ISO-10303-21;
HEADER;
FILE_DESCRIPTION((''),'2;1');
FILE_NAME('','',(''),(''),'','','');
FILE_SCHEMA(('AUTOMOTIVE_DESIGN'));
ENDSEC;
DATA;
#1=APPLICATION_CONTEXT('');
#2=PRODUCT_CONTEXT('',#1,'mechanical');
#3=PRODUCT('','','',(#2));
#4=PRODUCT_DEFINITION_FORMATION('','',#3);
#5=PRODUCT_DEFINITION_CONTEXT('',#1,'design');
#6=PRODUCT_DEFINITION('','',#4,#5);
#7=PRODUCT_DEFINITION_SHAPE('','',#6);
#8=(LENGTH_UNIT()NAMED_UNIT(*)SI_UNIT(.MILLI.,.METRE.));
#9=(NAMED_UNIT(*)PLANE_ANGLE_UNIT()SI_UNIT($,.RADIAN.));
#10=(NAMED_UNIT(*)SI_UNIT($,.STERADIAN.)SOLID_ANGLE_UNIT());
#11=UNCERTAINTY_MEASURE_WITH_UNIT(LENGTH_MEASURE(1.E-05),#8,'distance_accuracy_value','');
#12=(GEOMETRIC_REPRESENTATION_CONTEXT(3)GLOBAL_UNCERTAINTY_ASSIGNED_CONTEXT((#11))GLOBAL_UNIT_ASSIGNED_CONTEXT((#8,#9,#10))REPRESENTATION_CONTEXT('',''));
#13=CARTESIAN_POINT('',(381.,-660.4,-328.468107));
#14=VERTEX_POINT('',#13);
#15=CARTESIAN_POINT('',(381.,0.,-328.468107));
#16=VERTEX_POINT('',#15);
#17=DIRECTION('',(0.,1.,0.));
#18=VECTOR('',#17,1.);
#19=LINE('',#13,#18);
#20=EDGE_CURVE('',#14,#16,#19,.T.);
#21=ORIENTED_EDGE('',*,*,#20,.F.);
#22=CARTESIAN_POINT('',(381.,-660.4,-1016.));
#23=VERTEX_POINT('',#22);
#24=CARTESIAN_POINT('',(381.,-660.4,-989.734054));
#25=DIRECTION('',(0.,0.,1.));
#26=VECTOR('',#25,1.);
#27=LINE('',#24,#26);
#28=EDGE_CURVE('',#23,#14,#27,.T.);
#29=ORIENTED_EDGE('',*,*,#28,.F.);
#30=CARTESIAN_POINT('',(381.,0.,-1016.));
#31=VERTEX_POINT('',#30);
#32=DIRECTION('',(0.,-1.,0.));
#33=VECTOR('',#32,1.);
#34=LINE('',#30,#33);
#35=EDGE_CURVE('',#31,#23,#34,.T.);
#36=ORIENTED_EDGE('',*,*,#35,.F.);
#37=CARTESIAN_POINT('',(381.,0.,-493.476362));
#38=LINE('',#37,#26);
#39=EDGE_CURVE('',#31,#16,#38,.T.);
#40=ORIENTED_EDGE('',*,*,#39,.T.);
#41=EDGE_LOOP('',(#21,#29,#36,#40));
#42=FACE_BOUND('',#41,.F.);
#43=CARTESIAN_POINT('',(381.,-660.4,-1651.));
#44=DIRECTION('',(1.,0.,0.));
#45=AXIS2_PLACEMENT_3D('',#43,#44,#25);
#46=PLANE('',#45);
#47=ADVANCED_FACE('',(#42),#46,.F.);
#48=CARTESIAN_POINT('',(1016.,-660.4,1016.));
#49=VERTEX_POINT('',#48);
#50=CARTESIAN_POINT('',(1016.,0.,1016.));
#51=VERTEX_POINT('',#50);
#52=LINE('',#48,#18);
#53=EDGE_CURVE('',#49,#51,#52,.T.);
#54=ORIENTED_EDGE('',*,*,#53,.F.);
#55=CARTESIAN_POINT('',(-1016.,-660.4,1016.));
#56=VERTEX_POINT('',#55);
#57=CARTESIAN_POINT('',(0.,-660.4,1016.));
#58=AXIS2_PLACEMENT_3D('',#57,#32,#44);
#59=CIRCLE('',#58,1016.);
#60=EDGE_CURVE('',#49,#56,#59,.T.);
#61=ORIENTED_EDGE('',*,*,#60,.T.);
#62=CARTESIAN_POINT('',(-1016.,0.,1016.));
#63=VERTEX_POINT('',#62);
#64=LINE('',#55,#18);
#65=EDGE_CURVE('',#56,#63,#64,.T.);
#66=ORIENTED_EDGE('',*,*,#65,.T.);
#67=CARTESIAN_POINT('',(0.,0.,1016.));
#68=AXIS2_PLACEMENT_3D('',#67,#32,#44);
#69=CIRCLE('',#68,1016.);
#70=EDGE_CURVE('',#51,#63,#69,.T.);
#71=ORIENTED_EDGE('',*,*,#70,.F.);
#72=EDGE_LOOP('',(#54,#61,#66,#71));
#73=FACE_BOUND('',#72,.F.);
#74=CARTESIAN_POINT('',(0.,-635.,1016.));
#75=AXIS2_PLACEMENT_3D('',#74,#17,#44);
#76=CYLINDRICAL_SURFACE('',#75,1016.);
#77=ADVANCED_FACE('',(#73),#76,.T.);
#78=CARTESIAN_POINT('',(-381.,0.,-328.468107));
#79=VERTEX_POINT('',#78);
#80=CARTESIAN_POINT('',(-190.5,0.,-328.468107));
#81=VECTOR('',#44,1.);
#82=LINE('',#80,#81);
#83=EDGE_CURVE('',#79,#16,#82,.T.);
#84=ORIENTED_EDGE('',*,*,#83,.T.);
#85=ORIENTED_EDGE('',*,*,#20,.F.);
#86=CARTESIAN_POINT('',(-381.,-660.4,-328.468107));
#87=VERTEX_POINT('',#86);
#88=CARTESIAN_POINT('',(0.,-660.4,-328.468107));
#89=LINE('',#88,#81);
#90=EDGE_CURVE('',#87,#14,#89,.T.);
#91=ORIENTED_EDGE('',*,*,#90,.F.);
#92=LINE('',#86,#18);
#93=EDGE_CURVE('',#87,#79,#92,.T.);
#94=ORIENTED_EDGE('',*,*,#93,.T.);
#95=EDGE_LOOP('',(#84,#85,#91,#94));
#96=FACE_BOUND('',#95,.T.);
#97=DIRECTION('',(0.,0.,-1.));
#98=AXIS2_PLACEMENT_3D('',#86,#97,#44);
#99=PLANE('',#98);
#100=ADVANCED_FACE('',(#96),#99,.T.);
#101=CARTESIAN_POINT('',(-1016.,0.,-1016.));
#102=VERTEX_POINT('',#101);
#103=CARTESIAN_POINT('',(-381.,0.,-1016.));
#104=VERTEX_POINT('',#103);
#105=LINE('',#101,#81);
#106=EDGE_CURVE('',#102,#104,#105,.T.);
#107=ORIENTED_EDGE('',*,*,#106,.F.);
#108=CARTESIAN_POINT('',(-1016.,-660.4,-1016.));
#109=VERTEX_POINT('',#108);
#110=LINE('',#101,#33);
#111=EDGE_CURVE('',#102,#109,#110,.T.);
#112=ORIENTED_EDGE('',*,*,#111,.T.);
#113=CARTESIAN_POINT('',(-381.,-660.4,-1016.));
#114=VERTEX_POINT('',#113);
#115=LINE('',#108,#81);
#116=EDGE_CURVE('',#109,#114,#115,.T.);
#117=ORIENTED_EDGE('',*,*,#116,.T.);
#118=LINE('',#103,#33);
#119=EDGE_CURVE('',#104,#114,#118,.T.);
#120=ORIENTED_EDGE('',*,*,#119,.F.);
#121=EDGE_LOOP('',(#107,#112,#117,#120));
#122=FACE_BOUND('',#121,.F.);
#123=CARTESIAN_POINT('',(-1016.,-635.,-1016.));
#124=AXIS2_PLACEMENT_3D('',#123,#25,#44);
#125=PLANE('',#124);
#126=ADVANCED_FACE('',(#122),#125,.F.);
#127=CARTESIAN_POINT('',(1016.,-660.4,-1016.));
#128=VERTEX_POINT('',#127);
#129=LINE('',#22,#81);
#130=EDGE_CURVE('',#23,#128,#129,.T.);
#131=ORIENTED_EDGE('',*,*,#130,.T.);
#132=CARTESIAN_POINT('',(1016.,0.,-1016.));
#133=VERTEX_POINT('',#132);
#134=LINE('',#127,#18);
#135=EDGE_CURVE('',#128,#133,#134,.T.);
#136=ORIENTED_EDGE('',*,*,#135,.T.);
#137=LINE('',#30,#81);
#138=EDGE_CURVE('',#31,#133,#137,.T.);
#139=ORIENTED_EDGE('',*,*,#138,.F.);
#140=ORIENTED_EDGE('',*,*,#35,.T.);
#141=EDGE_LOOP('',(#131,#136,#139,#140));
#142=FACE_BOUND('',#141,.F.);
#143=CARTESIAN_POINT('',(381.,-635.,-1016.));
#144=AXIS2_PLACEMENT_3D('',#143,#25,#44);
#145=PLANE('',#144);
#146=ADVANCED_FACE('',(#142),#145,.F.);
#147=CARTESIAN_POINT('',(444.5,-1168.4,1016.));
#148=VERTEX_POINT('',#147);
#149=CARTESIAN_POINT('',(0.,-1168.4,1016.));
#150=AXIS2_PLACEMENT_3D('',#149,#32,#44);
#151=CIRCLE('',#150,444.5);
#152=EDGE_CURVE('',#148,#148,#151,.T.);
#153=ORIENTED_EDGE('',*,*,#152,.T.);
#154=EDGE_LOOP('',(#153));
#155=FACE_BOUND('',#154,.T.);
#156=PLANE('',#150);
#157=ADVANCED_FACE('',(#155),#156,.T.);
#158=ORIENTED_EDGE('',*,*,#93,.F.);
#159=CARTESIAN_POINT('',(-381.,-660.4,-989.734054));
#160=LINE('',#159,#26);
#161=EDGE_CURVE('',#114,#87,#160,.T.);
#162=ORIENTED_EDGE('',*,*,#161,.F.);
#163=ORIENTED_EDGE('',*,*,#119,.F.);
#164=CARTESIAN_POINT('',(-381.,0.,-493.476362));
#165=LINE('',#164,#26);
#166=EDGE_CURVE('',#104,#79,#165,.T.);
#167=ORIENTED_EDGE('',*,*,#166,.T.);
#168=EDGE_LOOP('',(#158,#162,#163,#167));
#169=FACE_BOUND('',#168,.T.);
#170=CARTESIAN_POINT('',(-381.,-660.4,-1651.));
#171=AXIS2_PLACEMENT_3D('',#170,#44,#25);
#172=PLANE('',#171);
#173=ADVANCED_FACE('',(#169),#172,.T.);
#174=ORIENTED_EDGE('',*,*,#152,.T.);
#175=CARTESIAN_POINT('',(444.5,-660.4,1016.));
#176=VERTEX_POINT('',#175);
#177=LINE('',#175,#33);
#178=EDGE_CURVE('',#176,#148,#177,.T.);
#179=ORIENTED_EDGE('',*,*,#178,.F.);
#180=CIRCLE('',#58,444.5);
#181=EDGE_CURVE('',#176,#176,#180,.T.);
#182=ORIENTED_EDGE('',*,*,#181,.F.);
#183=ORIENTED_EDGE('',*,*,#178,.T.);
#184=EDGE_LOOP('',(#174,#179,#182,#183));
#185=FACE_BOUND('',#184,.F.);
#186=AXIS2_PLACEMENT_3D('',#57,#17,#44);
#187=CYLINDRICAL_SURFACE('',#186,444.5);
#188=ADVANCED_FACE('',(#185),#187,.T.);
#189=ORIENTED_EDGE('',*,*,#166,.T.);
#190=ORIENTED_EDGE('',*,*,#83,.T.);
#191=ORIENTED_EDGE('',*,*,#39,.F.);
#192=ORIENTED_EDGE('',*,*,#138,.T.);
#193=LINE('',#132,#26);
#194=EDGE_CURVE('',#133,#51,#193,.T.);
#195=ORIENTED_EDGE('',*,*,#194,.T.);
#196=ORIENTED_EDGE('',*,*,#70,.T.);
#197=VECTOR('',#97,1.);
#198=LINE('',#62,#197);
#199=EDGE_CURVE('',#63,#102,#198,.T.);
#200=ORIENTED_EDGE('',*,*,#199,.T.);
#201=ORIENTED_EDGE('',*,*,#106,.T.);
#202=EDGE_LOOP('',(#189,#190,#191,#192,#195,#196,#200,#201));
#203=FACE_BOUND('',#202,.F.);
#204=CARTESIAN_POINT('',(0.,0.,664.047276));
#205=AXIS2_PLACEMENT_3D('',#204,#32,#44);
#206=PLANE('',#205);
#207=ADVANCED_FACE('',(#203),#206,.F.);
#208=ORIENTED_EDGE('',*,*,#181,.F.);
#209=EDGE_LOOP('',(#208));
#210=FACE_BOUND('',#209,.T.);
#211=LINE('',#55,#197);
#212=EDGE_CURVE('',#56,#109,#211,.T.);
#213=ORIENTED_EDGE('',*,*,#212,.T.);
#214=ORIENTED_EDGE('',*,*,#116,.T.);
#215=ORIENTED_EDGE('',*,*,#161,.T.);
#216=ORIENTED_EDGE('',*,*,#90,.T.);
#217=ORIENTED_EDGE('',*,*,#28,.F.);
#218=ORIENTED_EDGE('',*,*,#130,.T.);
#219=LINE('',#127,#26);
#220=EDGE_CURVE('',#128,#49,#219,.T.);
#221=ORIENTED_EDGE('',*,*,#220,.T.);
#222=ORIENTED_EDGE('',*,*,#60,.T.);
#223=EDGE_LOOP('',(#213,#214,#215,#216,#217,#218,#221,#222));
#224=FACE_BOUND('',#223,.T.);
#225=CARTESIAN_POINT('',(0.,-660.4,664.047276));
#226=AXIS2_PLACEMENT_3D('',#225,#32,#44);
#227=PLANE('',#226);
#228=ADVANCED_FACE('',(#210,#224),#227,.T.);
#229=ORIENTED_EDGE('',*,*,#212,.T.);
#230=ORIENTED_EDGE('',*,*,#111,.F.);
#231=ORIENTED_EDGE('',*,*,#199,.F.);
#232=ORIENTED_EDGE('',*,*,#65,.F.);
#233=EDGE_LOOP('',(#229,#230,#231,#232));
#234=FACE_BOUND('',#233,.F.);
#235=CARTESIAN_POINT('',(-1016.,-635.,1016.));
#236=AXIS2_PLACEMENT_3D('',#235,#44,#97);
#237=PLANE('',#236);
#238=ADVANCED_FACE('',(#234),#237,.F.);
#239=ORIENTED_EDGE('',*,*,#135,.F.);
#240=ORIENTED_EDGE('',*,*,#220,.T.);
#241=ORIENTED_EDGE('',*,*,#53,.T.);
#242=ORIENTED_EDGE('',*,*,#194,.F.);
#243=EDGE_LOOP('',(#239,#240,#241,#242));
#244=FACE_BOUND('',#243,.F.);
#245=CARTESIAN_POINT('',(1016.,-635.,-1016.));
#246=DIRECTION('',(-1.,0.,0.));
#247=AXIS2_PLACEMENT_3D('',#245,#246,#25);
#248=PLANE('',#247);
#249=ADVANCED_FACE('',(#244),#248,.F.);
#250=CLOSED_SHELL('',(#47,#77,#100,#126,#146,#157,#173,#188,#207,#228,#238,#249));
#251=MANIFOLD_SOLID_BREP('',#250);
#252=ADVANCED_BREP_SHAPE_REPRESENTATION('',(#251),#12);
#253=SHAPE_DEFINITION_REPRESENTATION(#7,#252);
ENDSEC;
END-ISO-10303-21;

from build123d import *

# Parameters (mm, degrees)
F0_W     = 762
F0_H     = 635
F1_DEPTH = 635
F2_DEPTH = 25.4
F3_W     = 762
F3_H     = 1322.5318927765
F4_DEPTH = 660.401
F5_R     = 444.5
F6_DEPTH = 508


with BuildPart() as f1:
    # F0 (on Front) → F1 (new body)
    with BuildSketch(Plane.XZ):
        with BuildLine():
            ThreePointArc((-1016, 1016), (0, 0), (1016, 1016))
            Line((1016, 1016), (-1016, 1016))
        make_face()
        with Locations((0, -1333.5)):
            Rectangle(F0_W, F0_H)
        with BuildLine():
            Line((381, -1016), (1016, -1016))
            Line((1016, -1016), (1016, 1016))
            ThreePointArc((1016, 1016), (0, 0), (-1016, 1016))
            Line((-1016, 1016), (-1016, -1016))
            Line((-1016, -1016), (-381, -1016))
            Line((-381, -1016), (-381, -381))
            Line((-381, -381), (381, -381))
            Line((381, -381), (381, -1016))
        make_face()
        with Locations((0, -698.5)):
            Rectangle(F0_W, F0_H)
        with BuildLine():
            Line((-1016, 1016), (1016, 1016))
            ThreePointArc((1016, 1016), (0, 2032), (-1016, 1016))
        make_face()
    extrude(amount=F1_DEPTH)

    # F2 (add): a face of the model
    f2_faces = [f1.faces().sort_by_distance(p)[0] for p in [
        (0, -635, 272.8986892682),
    ]]
    extrude(f2_faces, amount=F2_DEPTH)

    # F3 (on face) → F4 (cut, through all)
    with BuildSketch(Plane.XZ.offset(660.4)):
        with Locations((0, -989.7340536118)):
            Rectangle(F3_W, F3_H)
    extrude(amount=-F4_DEPTH, mode=Mode.SUBTRACT)

    # F5 (on face) → F6 (join)
    with BuildSketch(Plane.XZ.offset(660.4)):
        with Locations((0, 1016)):
            Circle(F5_R)
    extrude(amount=F6_DEPTH)


solid = f1.part
